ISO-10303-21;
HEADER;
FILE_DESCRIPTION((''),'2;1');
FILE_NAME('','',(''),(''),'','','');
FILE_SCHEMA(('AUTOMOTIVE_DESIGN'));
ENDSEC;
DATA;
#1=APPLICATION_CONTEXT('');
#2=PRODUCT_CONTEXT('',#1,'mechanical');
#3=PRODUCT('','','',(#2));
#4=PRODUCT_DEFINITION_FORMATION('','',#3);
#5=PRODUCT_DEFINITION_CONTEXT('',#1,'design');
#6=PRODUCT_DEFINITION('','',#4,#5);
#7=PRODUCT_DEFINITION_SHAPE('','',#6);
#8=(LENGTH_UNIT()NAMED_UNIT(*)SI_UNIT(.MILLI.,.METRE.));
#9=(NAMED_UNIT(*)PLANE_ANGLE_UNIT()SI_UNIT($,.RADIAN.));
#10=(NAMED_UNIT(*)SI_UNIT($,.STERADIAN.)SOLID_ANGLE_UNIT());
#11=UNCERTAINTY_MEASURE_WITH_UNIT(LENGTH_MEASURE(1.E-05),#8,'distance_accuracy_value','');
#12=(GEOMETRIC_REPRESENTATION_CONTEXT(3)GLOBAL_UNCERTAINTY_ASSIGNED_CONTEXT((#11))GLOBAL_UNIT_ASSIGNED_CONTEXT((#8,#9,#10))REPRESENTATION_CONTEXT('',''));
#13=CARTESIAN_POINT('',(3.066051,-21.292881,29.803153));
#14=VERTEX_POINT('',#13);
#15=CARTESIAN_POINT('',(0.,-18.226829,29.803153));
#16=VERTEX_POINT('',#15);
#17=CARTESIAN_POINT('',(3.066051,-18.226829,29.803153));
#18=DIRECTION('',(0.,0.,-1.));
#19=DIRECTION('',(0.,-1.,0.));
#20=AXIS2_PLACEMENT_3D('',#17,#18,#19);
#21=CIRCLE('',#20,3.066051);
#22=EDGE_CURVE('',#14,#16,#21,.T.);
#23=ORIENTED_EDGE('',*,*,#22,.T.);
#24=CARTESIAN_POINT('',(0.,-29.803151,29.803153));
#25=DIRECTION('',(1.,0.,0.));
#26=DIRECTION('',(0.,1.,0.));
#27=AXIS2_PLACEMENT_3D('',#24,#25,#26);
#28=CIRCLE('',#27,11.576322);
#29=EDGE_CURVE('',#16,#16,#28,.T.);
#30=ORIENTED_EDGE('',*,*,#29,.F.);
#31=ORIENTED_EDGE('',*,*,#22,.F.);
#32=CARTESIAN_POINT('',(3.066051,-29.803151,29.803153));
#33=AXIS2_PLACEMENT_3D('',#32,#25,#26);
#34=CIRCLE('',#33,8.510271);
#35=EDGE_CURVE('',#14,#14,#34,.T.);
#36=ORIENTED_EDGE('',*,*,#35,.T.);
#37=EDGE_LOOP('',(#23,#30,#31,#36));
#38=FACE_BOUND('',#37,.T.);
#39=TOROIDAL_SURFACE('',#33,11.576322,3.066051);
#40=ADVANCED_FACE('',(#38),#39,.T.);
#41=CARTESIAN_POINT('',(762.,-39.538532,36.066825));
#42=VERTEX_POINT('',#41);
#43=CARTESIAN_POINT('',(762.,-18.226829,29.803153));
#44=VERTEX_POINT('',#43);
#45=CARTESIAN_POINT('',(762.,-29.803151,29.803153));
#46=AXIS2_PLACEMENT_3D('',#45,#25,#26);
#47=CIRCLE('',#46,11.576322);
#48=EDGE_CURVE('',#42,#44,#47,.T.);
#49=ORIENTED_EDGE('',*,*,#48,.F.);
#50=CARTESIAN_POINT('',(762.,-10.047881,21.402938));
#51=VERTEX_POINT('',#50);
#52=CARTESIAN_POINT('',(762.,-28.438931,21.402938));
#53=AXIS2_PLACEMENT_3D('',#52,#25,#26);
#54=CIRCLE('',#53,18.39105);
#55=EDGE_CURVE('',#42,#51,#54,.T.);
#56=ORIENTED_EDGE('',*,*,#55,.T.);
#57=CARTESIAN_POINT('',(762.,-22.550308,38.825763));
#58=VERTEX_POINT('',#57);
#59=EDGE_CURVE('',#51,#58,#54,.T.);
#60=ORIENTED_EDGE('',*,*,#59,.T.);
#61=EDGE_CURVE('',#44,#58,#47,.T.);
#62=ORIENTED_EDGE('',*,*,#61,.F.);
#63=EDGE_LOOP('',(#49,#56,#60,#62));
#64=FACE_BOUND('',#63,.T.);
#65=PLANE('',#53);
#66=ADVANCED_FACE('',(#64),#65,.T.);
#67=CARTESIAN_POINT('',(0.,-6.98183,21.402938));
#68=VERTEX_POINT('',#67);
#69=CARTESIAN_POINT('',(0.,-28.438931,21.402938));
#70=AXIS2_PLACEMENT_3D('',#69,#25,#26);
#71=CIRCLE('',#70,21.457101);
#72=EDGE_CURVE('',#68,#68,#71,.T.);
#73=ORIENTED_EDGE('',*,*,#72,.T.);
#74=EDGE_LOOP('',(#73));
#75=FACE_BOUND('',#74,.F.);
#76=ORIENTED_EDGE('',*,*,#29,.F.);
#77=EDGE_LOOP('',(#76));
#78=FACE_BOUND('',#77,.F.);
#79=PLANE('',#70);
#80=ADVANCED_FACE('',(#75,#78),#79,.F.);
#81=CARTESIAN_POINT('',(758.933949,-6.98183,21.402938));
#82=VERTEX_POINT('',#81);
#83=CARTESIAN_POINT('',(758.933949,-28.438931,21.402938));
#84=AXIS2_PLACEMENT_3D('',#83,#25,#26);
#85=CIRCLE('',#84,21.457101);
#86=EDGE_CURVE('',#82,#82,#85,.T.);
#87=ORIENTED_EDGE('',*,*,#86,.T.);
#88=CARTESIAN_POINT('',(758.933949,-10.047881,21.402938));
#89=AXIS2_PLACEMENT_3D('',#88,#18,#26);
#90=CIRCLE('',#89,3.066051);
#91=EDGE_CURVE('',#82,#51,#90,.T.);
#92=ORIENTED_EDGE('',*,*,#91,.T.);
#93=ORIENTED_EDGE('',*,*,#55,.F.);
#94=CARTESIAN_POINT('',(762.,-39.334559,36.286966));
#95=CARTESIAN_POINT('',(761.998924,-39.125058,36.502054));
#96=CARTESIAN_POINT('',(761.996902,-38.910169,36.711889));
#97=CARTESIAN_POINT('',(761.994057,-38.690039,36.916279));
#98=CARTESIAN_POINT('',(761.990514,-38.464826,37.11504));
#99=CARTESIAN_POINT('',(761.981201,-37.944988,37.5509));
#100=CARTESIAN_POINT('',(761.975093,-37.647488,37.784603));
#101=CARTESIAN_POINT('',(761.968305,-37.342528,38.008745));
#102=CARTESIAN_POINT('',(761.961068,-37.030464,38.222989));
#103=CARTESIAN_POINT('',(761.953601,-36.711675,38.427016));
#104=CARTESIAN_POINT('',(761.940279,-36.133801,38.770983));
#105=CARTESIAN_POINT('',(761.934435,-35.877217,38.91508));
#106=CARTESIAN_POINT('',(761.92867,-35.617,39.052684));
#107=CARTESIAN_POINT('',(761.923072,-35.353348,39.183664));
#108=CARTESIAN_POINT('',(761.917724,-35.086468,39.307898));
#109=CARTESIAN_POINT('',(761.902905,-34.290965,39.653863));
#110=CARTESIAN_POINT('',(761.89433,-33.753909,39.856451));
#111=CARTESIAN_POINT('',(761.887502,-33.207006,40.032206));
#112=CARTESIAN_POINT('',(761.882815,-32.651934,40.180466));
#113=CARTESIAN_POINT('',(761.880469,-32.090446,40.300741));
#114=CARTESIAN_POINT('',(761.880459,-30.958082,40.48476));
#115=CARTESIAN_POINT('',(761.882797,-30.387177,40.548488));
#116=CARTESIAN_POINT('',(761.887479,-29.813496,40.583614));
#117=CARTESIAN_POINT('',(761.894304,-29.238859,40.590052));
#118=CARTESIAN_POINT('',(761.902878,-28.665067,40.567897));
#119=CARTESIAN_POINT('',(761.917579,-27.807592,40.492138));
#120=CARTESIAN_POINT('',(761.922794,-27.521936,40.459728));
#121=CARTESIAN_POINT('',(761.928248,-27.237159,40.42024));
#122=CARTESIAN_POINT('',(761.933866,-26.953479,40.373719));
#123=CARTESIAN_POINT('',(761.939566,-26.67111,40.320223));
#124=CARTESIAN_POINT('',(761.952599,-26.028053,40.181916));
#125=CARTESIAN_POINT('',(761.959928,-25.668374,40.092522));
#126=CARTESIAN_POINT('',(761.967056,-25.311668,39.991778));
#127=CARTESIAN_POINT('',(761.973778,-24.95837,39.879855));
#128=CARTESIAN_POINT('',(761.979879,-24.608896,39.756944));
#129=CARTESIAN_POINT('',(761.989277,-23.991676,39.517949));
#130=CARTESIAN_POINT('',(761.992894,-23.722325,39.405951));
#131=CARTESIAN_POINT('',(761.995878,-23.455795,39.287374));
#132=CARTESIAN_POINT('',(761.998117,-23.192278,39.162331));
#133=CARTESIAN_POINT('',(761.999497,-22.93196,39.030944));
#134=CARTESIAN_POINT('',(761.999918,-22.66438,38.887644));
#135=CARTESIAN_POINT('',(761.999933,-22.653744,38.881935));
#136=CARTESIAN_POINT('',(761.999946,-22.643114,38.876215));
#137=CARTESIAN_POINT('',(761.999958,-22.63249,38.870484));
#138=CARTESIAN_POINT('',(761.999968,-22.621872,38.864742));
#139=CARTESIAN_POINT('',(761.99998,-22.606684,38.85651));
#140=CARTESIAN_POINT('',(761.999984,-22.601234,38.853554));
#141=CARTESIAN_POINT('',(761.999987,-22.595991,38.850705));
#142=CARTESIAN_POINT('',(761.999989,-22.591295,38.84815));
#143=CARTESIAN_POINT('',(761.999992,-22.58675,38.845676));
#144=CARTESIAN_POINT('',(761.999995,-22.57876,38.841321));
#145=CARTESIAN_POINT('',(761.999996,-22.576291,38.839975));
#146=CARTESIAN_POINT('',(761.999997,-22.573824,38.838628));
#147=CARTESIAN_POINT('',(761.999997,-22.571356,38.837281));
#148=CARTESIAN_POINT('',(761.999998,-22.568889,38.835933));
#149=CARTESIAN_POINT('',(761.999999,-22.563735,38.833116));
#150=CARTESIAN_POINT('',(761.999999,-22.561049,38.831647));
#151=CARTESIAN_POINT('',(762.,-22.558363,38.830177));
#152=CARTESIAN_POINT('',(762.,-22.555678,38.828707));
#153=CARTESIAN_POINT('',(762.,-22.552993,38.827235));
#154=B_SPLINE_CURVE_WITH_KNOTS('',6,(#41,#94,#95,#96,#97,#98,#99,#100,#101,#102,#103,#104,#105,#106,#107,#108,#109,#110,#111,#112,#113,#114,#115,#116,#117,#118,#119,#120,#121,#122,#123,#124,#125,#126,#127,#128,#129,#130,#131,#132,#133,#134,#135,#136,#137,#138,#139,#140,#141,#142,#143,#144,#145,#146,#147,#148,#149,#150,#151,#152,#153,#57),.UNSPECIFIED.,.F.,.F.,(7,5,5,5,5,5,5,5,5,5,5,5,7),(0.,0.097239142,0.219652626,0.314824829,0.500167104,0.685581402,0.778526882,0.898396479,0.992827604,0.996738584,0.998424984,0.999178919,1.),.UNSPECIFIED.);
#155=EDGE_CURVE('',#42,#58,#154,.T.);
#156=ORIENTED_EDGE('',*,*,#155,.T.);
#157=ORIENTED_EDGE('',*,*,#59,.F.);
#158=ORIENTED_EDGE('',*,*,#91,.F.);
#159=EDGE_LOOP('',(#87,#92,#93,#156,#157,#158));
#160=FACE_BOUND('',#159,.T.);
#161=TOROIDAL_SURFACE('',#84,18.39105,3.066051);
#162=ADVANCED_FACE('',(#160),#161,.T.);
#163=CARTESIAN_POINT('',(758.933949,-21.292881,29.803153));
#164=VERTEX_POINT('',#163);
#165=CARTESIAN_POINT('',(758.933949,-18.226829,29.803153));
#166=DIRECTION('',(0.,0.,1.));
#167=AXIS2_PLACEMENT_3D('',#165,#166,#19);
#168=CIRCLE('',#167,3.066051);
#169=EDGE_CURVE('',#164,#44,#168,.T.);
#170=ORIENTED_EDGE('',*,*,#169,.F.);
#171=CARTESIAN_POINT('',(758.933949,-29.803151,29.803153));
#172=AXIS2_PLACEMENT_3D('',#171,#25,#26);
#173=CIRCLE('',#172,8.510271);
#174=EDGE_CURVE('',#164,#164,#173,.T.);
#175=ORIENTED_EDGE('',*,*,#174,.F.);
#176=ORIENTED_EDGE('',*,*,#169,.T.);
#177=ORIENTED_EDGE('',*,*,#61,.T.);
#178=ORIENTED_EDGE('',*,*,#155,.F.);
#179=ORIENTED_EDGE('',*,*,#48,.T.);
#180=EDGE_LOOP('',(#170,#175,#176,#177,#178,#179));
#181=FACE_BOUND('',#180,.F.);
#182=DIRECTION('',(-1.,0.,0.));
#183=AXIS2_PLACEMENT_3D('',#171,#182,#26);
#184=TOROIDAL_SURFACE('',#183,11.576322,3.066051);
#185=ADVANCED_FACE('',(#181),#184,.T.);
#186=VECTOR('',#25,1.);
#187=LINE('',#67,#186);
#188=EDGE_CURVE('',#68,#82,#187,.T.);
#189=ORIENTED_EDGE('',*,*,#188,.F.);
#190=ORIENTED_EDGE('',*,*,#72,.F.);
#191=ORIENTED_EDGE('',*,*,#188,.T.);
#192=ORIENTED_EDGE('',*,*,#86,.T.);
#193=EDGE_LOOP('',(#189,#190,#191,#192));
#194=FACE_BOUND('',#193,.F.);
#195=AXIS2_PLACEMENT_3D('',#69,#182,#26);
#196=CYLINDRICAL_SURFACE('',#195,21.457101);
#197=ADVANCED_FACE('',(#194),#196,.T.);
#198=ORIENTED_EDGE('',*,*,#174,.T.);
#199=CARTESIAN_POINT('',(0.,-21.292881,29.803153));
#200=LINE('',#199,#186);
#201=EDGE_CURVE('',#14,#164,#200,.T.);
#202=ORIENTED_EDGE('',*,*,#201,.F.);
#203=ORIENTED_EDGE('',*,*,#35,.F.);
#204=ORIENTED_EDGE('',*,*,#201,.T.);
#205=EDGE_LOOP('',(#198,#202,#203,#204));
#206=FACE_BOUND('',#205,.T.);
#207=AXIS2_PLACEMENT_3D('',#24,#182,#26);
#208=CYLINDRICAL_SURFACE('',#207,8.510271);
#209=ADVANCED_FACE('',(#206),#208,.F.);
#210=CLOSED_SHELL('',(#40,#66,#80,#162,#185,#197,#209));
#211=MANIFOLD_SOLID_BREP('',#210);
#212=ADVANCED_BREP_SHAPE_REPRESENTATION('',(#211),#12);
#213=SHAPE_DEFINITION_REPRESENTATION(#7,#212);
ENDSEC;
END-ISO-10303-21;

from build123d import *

# Parameters (mm, degrees)
F0_R     = 21.4571011733
F0_R_2   = 8.5102706454
F1_DEPTH = 762


# Not quite as in the source:
# - a fillet or chamfer that OpenCascade refuses, or shapes differently, is made with other operations: its cross-section is extruded or revolved along the edge and cut away or added


with BuildPart() as f1:
    # F0 (on Right) → F1 (new body)
    with BuildSketch(Plane.YZ):
        with Locations((-28.4389311976, 21.4029382453)):
            Circle(F0_R)
        with Locations((-29.8031512648, 29.8031531274)):
            Circle(F0_R_2, mode=Mode.SUBTRACT)
    extrude(amount=F1_DEPTH)

    # F2: fillet of radius 3.0660512242 on 4 edges, made by hand


with BuildPart() as f2_tool1:
    # F2_s2 → F2_t3 (revolve)
    with BuildSketch(Plane.XY.offset(21.4029382453)):
        with BuildLine():
            ThreePointArc((758.9339487758, -6.9818300243), (761.1019743879, -7.8798556364), (762, -10.0478812485))
            Line((762, -10.0478812485), (762, -6.9818300243))
            Line((762, -6.9818300243), (758.9339487758, -6.9818300243))
        make_face()
    revolve(axis=Axis((762, -28.4389311976, 21.4029382453), (1, 0, 0)))


with BuildPart() as f2_tool4:
    # F2_s5 → F2_t6 (revolve)
    with BuildSketch(Plane.XY.offset(29.8031531274)):
        with BuildLine():
            ThreePointArc((758.9339487758, -21.2928806194), (761.1019743879, -20.3948550073), (762, -18.2268293951))
            Line((762, -18.2268293951), (762, -21.2928806194))
            Line((762, -21.2928806194), (758.9339487758, -21.2928806194))
        make_face()
    revolve(axis=Axis((762, -29.8031512648, 29.8031531274), (1, 0, 0)))


with BuildPart() as f2_tool7:
    # F2_s8 → F2_t9 (revolve)
    with BuildSketch(Plane.XY.offset(29.8031531274)):
        with BuildLine():
            ThreePointArc((3.0660512242, -21.2928806194), (0.8980256121, -20.3948550073), (0, -18.2268293951))
            Line((0, -18.2268293951), (0, -21.2928806194))
            Line((0, -21.2928806194), (3.0660512242, -21.2928806194))
        make_face()
    revolve(axis=Axis((0, -29.8031512648, 29.8031531274), (1, 0, 0)))


with BuildPart() as f1_1:
    add(f1.part)

    # F2_t10: cut F2_tool1, F2_tool4, F2_tool7
    add([f2_tool1.part, f2_tool4.part, f2_tool7.part], mode=Mode.SUBTRACT)


solid = f1_1.part
